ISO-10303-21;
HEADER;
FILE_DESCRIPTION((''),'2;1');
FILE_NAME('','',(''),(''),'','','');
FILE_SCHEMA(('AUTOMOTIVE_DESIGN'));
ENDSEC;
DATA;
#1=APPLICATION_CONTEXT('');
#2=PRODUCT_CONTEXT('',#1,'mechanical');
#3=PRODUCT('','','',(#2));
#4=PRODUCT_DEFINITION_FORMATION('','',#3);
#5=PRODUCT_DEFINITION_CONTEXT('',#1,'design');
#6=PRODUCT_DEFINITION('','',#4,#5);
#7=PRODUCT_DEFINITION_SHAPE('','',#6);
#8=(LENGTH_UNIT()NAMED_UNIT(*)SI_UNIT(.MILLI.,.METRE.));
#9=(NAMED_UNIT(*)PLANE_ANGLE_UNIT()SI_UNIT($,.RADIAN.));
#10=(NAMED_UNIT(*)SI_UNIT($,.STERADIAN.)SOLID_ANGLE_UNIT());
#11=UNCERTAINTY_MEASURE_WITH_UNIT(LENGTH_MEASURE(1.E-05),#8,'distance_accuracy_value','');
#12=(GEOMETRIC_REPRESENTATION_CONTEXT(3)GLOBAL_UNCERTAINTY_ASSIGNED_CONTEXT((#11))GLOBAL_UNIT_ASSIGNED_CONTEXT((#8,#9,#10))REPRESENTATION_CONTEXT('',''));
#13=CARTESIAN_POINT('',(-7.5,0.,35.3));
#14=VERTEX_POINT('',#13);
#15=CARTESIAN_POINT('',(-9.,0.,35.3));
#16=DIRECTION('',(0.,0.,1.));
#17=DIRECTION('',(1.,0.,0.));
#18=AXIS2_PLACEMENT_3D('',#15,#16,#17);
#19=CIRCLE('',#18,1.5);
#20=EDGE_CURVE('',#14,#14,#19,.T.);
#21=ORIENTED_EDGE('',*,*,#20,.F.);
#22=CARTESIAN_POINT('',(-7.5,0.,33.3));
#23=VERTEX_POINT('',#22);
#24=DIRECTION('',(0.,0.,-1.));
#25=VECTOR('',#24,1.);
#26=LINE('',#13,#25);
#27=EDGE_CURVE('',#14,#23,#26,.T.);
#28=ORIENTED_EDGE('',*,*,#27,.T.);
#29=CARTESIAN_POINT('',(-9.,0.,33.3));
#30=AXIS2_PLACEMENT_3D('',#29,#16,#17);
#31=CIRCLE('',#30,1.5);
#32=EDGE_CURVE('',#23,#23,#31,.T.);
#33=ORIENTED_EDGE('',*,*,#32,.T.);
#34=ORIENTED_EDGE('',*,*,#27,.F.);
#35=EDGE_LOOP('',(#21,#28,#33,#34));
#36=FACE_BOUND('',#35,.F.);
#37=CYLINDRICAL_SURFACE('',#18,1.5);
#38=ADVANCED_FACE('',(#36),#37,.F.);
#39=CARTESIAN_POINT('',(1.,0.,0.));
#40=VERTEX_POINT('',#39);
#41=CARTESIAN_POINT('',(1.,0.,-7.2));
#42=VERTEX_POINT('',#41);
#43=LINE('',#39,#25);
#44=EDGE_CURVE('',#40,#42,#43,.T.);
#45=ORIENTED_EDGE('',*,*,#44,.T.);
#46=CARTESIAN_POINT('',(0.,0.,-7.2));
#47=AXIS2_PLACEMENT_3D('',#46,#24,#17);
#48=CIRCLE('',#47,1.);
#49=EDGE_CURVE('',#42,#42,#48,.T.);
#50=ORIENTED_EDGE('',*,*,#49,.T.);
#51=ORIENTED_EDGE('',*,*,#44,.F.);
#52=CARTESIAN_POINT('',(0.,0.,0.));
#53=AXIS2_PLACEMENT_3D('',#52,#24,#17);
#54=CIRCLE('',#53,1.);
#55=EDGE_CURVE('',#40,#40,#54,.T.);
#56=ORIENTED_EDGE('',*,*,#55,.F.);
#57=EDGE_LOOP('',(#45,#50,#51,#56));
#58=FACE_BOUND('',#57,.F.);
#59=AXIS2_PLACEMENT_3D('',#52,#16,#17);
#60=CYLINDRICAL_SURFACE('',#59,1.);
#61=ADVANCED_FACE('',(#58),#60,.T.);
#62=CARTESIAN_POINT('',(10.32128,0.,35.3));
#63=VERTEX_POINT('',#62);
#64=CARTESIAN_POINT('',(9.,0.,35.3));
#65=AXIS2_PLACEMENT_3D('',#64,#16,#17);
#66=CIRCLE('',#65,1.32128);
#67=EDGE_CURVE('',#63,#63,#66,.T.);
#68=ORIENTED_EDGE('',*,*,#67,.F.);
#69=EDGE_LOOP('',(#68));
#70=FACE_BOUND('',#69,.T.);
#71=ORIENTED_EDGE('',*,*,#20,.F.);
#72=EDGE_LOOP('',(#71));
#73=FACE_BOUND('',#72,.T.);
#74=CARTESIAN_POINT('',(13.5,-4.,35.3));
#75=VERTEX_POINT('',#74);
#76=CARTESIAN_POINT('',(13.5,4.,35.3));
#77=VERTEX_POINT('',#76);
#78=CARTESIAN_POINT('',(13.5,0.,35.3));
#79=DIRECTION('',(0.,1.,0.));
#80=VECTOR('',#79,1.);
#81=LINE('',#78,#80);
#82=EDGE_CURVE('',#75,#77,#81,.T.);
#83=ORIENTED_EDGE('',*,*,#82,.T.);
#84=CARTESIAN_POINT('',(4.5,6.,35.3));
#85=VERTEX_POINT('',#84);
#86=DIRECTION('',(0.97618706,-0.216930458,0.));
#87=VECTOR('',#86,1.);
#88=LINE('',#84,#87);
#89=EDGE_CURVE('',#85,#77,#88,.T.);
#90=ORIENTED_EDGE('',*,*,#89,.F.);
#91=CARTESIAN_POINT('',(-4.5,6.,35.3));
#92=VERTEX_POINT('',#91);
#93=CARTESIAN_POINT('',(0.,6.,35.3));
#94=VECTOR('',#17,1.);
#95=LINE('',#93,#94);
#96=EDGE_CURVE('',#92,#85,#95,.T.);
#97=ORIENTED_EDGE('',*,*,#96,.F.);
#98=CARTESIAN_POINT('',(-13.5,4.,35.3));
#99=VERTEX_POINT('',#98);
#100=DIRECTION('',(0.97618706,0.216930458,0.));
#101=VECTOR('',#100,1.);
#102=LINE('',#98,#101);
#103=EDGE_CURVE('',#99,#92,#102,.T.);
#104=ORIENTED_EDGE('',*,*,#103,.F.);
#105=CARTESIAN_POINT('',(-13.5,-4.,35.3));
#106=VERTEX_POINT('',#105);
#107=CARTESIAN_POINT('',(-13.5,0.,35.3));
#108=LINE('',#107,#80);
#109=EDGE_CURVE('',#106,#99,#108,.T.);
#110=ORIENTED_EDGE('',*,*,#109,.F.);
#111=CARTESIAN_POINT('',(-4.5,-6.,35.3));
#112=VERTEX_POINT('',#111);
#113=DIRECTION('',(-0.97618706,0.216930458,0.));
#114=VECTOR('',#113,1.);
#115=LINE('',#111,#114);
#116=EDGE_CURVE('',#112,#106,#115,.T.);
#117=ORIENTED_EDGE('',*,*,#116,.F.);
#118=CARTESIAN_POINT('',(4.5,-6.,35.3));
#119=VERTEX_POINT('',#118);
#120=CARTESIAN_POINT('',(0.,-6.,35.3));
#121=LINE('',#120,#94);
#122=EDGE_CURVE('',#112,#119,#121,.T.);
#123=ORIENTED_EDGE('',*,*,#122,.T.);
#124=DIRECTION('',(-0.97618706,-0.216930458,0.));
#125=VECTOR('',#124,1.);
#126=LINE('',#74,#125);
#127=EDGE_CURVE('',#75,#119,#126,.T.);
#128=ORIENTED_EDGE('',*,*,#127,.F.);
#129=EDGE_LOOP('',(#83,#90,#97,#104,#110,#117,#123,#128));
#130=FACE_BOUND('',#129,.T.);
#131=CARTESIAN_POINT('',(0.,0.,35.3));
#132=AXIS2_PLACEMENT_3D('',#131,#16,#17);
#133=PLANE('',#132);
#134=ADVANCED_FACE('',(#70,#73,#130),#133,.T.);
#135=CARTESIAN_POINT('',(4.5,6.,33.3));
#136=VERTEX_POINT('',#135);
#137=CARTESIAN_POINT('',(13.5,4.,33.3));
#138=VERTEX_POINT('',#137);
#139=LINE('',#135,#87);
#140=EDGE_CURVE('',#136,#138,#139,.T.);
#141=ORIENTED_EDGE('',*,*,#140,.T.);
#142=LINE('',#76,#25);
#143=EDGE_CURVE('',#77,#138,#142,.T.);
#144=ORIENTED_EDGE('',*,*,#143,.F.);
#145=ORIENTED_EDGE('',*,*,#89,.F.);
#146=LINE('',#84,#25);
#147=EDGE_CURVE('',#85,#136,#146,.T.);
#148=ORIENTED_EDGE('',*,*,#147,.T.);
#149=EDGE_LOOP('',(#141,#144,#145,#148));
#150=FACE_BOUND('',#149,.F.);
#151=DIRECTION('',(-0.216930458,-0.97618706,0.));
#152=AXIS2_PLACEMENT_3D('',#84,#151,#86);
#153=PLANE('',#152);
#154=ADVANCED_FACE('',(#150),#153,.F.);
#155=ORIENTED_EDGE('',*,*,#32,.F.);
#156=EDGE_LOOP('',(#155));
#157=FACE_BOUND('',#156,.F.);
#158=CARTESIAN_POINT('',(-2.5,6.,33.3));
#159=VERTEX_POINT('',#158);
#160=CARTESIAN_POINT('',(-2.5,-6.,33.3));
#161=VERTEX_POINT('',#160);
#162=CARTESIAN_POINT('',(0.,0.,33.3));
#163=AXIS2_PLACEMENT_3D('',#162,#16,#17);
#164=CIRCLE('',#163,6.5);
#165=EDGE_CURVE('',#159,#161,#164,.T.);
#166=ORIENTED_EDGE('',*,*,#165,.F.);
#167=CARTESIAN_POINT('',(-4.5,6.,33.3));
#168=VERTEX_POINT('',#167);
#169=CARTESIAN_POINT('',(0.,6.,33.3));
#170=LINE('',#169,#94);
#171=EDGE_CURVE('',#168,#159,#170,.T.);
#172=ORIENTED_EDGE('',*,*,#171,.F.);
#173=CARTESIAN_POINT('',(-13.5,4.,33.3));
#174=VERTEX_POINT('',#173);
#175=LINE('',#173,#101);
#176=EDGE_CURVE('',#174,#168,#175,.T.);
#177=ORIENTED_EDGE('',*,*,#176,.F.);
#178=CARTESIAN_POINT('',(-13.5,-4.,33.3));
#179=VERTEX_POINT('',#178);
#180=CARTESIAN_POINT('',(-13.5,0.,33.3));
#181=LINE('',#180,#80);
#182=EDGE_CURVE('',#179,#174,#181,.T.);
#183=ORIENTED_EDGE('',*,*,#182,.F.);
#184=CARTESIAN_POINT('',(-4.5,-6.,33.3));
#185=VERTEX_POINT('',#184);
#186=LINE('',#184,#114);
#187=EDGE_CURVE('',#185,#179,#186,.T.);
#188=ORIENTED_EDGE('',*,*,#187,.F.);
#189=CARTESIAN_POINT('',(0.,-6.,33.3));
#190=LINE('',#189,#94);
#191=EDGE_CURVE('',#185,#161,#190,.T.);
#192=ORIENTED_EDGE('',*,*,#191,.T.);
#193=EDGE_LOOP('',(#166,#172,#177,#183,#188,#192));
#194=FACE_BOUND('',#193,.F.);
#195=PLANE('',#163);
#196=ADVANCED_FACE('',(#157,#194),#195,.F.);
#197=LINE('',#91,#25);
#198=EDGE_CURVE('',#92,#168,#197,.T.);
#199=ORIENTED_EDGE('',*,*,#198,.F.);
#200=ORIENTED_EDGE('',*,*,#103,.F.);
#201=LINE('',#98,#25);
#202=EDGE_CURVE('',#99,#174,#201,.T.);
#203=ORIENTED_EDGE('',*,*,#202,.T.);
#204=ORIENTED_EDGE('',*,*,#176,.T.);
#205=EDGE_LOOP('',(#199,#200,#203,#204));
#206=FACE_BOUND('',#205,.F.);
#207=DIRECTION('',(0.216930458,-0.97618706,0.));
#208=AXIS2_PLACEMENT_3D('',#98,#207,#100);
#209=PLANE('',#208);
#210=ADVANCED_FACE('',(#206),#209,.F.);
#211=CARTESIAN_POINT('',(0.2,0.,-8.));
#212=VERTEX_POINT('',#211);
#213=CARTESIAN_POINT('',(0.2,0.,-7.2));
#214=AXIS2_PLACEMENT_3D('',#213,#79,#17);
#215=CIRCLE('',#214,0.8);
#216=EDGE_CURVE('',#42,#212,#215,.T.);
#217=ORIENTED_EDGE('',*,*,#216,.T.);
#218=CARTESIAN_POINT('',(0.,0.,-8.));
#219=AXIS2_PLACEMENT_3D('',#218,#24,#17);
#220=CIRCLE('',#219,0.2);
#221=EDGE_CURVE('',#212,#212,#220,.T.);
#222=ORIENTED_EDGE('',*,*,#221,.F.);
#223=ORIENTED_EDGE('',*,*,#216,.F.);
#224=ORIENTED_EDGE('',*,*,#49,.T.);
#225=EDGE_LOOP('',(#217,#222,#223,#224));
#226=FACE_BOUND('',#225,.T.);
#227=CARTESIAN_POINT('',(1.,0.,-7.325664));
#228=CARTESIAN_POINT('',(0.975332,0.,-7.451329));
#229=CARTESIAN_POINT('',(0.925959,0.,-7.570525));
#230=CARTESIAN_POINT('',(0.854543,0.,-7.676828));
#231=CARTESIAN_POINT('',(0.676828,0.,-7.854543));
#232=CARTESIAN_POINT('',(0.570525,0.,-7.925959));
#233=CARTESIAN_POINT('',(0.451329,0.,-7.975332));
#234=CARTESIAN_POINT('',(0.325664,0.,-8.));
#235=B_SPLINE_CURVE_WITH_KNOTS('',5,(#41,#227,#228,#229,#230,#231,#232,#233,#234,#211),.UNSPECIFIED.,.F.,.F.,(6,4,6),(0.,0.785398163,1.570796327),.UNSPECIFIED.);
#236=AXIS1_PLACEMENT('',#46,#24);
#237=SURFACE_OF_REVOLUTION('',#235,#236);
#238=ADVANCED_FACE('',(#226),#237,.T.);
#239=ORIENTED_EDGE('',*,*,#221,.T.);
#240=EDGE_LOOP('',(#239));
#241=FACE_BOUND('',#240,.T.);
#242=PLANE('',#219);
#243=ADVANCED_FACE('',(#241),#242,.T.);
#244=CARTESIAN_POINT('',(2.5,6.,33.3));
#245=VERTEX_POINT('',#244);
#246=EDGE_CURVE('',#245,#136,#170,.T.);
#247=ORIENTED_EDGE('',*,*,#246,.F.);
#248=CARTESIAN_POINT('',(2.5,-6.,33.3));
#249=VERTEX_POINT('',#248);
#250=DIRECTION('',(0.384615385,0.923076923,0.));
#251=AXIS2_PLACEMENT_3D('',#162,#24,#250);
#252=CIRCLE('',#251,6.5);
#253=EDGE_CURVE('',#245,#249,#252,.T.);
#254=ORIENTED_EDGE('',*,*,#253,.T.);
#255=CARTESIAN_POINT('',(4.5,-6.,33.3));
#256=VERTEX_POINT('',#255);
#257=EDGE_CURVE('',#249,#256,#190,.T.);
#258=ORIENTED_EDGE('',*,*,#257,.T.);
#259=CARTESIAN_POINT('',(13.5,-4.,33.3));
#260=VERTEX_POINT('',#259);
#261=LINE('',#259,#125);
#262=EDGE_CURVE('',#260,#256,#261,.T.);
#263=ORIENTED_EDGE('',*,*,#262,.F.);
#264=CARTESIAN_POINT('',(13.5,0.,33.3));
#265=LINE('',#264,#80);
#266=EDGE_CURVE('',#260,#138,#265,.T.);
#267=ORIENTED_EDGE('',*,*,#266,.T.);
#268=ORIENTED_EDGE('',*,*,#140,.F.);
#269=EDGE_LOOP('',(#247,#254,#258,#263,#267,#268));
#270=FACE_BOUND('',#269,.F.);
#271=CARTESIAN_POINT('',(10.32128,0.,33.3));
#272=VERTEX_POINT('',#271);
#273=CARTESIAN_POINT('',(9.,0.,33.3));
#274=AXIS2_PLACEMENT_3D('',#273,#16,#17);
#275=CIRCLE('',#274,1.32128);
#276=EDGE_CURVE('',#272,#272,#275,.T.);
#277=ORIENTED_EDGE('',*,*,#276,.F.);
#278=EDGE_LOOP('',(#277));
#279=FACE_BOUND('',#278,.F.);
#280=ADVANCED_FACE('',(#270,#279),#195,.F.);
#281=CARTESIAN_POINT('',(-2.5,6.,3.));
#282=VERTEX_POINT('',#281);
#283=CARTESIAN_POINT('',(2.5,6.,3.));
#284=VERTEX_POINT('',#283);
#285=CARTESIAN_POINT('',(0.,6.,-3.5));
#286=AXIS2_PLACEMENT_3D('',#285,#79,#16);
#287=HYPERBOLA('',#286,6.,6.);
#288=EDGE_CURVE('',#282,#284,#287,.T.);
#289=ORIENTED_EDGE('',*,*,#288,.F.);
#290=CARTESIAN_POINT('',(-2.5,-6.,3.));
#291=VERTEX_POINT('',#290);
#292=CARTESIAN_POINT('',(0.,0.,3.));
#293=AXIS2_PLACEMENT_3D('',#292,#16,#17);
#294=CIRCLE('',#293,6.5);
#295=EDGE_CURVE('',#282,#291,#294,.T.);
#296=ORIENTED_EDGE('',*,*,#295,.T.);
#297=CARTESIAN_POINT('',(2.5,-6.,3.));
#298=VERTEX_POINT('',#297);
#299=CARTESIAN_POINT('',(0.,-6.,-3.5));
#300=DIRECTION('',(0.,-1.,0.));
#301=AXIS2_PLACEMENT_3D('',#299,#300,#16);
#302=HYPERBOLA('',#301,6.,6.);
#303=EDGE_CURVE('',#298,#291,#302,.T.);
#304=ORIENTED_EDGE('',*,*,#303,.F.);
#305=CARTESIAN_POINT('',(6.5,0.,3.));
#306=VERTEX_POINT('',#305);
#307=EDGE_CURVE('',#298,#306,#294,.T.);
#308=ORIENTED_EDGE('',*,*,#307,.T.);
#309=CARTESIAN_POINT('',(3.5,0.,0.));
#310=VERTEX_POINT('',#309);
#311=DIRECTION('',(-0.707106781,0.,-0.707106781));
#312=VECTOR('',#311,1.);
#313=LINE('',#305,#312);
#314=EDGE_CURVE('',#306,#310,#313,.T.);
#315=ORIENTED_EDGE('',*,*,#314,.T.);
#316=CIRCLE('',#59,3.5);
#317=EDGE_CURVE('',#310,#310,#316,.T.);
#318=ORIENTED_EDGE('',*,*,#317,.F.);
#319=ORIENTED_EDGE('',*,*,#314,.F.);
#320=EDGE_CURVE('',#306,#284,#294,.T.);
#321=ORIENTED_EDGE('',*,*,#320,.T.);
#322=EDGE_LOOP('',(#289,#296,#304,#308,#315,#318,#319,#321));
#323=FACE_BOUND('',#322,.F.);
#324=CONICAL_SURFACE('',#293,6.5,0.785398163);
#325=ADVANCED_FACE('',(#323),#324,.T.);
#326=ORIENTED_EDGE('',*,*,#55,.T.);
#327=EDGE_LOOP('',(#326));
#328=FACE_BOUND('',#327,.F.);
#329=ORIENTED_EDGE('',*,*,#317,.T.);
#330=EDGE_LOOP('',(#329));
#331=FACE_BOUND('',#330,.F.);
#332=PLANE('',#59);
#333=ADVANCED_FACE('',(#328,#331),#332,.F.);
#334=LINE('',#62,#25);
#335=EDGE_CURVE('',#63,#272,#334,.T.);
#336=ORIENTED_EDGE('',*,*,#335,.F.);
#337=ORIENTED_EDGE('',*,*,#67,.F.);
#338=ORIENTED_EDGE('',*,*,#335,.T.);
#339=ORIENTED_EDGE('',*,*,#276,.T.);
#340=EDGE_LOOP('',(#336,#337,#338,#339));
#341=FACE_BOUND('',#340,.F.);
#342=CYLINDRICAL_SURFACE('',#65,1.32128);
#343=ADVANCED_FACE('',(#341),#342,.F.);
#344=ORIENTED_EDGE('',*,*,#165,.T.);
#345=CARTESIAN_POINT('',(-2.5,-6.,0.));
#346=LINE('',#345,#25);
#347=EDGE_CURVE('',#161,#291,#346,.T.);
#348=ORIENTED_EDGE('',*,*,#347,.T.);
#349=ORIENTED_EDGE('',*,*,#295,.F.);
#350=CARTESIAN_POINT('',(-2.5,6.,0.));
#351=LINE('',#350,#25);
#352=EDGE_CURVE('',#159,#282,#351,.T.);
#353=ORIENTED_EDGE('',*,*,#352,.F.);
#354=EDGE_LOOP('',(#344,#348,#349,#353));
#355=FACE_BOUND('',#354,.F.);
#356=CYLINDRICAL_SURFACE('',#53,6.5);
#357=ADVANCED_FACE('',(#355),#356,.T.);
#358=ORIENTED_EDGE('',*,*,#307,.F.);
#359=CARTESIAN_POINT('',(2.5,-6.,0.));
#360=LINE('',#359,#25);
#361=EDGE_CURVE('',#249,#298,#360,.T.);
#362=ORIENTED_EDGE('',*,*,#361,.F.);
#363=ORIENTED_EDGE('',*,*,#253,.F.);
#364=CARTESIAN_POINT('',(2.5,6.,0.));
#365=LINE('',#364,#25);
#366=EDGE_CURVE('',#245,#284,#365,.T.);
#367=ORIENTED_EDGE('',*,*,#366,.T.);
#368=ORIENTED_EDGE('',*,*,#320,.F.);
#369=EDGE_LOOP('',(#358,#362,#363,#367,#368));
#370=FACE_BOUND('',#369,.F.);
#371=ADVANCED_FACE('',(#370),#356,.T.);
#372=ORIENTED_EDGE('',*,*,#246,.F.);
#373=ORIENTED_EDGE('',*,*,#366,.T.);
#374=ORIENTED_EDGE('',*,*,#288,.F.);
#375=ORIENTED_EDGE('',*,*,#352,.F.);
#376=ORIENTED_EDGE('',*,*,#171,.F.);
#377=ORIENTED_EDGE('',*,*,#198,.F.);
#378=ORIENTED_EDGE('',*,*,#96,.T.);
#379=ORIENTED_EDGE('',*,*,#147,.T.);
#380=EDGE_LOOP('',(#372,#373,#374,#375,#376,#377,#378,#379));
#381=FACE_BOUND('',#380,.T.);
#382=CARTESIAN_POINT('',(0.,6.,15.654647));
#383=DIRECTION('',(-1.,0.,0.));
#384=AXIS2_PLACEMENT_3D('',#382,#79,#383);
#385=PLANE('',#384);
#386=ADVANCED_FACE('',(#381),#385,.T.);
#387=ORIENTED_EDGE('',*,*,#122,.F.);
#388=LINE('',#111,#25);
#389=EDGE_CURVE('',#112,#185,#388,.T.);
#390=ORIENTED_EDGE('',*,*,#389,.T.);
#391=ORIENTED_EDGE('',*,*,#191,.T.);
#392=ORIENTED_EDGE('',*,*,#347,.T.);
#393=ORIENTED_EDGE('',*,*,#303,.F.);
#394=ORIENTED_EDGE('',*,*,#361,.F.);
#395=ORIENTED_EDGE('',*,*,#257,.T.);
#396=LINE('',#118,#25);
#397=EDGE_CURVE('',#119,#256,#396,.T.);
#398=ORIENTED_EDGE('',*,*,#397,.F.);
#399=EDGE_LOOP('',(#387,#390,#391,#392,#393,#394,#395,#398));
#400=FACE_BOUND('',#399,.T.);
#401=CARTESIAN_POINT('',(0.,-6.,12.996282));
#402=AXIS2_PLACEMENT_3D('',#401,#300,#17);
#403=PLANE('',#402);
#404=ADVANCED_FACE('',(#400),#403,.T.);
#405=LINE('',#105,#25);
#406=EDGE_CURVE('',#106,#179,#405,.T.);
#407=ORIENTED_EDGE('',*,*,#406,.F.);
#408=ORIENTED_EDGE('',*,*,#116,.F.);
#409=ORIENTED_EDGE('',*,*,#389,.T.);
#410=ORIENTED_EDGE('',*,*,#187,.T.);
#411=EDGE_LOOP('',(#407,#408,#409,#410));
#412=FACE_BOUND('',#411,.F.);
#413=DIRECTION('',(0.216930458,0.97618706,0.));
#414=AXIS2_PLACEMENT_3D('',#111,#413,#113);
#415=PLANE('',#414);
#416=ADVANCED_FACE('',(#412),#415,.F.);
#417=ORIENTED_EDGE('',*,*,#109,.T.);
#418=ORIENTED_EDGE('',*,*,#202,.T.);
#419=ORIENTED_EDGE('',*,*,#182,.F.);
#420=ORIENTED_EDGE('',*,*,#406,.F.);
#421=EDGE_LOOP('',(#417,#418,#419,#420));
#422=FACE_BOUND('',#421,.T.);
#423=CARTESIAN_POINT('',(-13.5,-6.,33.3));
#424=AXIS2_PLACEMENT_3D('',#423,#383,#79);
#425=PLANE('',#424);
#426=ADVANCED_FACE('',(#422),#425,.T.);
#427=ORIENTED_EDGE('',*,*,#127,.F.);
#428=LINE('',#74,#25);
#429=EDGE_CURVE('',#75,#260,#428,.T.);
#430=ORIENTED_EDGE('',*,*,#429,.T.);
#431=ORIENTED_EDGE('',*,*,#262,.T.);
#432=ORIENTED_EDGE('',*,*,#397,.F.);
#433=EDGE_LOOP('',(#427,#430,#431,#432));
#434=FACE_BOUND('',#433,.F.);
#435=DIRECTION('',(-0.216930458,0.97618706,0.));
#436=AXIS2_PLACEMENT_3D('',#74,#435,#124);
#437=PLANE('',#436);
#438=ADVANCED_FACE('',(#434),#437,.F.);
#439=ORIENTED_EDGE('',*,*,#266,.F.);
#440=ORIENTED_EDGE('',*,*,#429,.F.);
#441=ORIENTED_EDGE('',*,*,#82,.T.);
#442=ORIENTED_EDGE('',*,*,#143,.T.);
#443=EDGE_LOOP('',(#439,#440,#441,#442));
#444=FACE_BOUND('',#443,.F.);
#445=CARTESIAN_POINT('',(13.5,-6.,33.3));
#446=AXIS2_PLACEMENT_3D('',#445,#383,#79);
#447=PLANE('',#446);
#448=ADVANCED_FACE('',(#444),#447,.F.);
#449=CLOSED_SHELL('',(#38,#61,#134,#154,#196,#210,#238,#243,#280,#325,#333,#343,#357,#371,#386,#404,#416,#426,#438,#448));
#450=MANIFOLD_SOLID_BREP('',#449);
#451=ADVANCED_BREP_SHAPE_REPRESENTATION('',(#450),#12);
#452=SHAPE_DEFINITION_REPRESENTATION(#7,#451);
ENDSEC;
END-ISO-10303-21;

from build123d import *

# Parameters (mm, degrees)
F0_R      = 6.5
F1_DEPTH  = 33.3
F2_SIZE   = 3
F3_W      = 27
F3_H      = 12
F4_DEPTH  = 2
F5_R      = 1
F6_DEPTH  = 8
F7_R      = 0.8
F8_R      = 1.5
F8_R_2    = 1.3212801888
F9_DEPTH  = 25
F11_DEPTH = 2
F12_W     = 9
F12_H     = 44.6074357137
F13_DEPTH = 5
F14_W     = 9
F14_H     = 35.2907052629
F15_DEPTH = 5


with BuildPart() as f1:
    # F0 (on Top) → F1 (new body)
    with BuildSketch(Plane.XY):
        Circle(F0_R)
    extrude(amount=F1_DEPTH)

    # F2
    f2_edges = [f1.edges().sort_by_distance(p)[0] for p in [
        (-6.5, 0, 0),
    ]]
    chamfer(f2_edges, length=F2_SIZE)

    # F3 (on face) → F4 (join)
    with BuildSketch(Plane.XY.offset(33.3)):
        Rectangle(F3_W, F3_H)
    extrude(amount=F4_DEPTH)

    # F5 (on face) → F6 (join)
    with BuildSketch(Plane(origin=(0, 0, 0), x_dir=(1, 0, 0), z_dir=(0, 0, -1))):
        Circle(F5_R)
    extrude(amount=F6_DEPTH)

    # F7
    f7_edges = [f1.edges().sort_by_distance(p)[0] for p in [
        (-1, 0, -8),
    ]]
    fillet(f7_edges, radius=F7_R)

    # F8 (on face) → F9 (cut)
    with BuildSketch(Plane.XY.offset(35.3)):
        with Locations((-9, 0)):
            Circle(F8_R)
        with Locations((9, 0)):
            Circle(F8_R_2)
    extrude(amount=-F9_DEPTH, mode=Mode.SUBTRACT)

    # F10 (on face) → F11 (cut, through all)
    with BuildSketch(Plane.XY.offset(35.3)):
        Polygon((-13.5, -4), (-13.5, -6), (-4.5, -6), align=None)
        Polygon((-4.5, 6), (-13.5, 6), (-13.5, 4), align=None)
        Polygon((13.5, -4), (4.5, -6), (13.5, -6), align=None)
        Polygon((13.5, 4), (13.5, 6), (4.5, 6), align=None)
    extrude(amount=-F11_DEPTH, mode=Mode.SUBTRACT)

    # F12 (on face) → F13 (cut)
    with BuildSketch(Plane.XZ.offset(6)):
        with Locations((0, 12.9962821431)):
            Rectangle(F12_W, F12_H)
    extrude(amount=F13_DEPTH, mode=Mode.SUBTRACT)

    # F14 (on face) → F15 (cut)
    with BuildSketch(Plane(origin=(0, 6, 0), x_dir=(-1, 0, 0), z_dir=(0, 1, 0))):
        with Locations((0, 15.6546473686)):
            Rectangle(F14_W, F14_H)
    extrude(amount=F15_DEPTH, mode=Mode.SUBTRACT)


solid = f1.part
